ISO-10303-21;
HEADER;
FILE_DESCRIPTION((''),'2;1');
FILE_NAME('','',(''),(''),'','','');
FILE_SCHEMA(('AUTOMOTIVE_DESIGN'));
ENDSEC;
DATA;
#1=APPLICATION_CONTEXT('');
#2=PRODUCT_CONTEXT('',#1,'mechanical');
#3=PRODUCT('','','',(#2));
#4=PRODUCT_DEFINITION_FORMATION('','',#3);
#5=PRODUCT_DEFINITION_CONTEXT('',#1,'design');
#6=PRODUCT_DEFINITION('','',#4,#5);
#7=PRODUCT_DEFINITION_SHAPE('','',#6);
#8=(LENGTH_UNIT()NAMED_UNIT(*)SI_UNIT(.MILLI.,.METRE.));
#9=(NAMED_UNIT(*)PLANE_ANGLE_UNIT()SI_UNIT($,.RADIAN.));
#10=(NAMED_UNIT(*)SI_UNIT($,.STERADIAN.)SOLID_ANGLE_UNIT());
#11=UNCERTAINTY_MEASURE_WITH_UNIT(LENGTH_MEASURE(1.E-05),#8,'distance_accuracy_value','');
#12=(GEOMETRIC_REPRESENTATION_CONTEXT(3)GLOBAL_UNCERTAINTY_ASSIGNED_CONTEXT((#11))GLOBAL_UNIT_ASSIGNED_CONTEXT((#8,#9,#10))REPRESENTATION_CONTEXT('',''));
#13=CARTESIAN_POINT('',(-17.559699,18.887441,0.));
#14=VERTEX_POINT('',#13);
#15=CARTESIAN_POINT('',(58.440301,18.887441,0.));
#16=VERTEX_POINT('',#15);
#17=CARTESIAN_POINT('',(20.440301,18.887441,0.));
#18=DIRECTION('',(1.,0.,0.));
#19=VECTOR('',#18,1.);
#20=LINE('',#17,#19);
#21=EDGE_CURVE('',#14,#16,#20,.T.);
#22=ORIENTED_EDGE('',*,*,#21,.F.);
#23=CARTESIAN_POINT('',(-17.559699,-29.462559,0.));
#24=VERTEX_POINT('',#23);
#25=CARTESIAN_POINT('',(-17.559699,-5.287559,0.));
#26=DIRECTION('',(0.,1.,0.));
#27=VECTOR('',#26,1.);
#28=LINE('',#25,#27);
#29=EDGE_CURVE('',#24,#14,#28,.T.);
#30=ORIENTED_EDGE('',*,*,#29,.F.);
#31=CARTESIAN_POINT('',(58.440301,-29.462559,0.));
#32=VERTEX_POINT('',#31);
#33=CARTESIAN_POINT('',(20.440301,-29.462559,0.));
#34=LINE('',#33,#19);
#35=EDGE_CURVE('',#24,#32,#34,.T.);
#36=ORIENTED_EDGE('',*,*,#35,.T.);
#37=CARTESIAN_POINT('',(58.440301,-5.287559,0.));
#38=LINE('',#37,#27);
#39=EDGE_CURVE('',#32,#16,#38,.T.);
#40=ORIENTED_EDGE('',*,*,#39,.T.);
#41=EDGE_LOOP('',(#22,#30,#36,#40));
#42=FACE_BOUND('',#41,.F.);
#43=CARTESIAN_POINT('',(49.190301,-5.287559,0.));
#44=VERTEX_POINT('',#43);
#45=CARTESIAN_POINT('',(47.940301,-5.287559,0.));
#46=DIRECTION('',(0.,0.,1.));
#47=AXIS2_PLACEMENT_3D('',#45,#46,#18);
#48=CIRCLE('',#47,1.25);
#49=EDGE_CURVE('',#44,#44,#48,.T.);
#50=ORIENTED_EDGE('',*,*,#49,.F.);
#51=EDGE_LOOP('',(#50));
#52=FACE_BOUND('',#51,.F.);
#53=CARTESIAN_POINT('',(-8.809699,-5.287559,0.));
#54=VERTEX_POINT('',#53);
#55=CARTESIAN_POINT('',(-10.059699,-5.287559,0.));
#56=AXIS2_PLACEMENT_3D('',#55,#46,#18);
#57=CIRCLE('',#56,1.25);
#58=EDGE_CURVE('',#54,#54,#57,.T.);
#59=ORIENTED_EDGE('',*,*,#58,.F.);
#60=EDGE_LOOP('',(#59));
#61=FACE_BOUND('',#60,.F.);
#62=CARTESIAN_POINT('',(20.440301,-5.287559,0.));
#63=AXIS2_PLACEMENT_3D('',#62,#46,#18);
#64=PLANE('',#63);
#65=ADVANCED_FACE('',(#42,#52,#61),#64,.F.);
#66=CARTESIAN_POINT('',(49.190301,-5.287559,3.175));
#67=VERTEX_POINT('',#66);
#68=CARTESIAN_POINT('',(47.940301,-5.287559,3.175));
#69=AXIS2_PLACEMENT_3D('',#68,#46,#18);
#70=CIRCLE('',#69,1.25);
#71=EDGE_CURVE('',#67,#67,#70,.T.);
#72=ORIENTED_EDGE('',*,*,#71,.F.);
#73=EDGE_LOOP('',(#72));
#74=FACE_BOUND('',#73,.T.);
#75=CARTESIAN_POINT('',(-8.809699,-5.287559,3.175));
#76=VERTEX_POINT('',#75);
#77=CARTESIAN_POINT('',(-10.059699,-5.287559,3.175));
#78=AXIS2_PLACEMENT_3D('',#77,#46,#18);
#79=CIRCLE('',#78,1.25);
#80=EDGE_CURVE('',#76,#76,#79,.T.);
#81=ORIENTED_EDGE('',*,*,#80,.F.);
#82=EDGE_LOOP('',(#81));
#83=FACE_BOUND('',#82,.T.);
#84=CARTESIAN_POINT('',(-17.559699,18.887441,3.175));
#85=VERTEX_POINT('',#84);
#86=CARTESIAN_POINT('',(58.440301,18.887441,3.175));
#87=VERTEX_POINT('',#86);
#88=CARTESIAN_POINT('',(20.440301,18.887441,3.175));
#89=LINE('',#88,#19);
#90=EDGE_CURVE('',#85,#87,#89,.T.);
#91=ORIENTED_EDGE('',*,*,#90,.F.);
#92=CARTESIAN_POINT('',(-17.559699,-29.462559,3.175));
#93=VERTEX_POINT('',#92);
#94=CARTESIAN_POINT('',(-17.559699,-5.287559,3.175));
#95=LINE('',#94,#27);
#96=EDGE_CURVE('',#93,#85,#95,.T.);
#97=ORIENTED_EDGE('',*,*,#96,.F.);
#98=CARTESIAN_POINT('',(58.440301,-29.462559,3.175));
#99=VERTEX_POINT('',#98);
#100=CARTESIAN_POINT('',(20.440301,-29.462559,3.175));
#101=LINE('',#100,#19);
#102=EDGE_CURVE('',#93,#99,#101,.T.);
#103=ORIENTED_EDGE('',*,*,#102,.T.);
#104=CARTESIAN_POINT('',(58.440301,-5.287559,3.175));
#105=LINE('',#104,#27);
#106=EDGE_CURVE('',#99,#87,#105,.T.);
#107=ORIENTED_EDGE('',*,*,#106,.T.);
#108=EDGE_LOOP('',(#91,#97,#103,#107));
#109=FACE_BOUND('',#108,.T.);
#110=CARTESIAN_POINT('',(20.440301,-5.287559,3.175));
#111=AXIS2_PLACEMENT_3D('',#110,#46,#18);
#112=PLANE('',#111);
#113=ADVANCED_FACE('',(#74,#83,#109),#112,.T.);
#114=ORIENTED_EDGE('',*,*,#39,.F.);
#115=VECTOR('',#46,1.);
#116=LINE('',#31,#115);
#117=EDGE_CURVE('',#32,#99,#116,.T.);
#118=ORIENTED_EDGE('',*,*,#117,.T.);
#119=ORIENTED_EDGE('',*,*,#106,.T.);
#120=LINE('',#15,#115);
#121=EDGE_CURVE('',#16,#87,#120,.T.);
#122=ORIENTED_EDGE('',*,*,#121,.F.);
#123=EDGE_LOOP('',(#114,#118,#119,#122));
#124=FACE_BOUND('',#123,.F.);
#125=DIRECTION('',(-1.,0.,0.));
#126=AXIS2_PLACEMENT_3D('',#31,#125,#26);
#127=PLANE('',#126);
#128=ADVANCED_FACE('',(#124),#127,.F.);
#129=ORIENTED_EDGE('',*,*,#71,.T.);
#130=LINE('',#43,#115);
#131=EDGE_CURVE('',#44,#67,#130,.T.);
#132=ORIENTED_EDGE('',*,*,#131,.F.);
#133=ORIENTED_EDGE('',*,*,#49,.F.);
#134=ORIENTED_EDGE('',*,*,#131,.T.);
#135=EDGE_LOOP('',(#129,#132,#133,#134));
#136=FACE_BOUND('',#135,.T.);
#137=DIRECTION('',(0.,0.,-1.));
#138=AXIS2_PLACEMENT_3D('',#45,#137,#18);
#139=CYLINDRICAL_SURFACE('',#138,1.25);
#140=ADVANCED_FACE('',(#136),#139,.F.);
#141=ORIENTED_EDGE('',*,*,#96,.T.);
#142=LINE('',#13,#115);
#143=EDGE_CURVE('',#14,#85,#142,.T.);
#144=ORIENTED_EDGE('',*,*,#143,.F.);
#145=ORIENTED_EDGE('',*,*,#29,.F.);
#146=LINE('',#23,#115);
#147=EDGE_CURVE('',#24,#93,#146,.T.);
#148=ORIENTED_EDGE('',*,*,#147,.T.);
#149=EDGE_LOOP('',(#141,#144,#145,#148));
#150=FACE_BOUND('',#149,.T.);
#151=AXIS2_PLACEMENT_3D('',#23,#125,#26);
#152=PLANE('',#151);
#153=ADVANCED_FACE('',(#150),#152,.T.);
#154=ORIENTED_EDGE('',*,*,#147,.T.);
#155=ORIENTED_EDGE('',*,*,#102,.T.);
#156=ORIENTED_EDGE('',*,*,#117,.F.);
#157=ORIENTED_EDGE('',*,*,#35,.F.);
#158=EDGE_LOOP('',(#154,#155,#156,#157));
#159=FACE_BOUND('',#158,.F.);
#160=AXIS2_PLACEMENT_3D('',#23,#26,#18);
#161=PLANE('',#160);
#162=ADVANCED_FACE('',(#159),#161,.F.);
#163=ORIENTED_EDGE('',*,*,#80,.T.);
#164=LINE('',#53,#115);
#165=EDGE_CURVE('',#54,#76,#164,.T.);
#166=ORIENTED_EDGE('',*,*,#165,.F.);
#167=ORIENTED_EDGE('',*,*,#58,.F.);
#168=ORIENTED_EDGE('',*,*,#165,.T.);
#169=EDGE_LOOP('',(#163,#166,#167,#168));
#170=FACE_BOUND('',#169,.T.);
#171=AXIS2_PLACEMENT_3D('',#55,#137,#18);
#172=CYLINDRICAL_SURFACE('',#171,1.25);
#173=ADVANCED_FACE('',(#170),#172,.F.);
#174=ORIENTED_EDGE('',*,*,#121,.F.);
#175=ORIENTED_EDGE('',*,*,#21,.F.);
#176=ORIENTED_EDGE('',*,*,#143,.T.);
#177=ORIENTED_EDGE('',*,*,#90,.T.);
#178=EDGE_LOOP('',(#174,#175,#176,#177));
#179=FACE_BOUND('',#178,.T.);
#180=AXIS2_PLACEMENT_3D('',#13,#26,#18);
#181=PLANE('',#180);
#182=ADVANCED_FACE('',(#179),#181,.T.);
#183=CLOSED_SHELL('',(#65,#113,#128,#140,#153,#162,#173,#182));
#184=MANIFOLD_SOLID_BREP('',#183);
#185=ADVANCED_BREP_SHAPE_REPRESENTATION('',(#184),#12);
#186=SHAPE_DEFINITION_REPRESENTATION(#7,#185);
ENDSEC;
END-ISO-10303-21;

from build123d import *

# Parameters (mm, degrees)
F0_W     = 76
F0_H     = 48.35
F0_R     = 1.25
F1_DEPTH = 3.175


# Not quite as in the source:
# - a length typed as a fraction of an inch, garbled in the dataset ("3 / 203.2 mm" for 3/8 in), is restored
# - a feature names something its author has since deleted; it is built from what else it names


with BuildPart() as f1:
    # F0 (on Top) → F1 (new body)
    with BuildSketch(Plane.XY):
        with Locations((20.4403014183, -5.2875590026)):
            Rectangle(F0_W, F0_H)
        with Locations((-10.0596985817, -5.2875590026)):
            Circle(F0_R, mode=Mode.SUBTRACT)
        with Locations((47.9403014183, -5.2875590026)):
            Circle(F0_R, mode=Mode.SUBTRACT)
    extrude(amount=F1_DEPTH)


solid = f1.part
